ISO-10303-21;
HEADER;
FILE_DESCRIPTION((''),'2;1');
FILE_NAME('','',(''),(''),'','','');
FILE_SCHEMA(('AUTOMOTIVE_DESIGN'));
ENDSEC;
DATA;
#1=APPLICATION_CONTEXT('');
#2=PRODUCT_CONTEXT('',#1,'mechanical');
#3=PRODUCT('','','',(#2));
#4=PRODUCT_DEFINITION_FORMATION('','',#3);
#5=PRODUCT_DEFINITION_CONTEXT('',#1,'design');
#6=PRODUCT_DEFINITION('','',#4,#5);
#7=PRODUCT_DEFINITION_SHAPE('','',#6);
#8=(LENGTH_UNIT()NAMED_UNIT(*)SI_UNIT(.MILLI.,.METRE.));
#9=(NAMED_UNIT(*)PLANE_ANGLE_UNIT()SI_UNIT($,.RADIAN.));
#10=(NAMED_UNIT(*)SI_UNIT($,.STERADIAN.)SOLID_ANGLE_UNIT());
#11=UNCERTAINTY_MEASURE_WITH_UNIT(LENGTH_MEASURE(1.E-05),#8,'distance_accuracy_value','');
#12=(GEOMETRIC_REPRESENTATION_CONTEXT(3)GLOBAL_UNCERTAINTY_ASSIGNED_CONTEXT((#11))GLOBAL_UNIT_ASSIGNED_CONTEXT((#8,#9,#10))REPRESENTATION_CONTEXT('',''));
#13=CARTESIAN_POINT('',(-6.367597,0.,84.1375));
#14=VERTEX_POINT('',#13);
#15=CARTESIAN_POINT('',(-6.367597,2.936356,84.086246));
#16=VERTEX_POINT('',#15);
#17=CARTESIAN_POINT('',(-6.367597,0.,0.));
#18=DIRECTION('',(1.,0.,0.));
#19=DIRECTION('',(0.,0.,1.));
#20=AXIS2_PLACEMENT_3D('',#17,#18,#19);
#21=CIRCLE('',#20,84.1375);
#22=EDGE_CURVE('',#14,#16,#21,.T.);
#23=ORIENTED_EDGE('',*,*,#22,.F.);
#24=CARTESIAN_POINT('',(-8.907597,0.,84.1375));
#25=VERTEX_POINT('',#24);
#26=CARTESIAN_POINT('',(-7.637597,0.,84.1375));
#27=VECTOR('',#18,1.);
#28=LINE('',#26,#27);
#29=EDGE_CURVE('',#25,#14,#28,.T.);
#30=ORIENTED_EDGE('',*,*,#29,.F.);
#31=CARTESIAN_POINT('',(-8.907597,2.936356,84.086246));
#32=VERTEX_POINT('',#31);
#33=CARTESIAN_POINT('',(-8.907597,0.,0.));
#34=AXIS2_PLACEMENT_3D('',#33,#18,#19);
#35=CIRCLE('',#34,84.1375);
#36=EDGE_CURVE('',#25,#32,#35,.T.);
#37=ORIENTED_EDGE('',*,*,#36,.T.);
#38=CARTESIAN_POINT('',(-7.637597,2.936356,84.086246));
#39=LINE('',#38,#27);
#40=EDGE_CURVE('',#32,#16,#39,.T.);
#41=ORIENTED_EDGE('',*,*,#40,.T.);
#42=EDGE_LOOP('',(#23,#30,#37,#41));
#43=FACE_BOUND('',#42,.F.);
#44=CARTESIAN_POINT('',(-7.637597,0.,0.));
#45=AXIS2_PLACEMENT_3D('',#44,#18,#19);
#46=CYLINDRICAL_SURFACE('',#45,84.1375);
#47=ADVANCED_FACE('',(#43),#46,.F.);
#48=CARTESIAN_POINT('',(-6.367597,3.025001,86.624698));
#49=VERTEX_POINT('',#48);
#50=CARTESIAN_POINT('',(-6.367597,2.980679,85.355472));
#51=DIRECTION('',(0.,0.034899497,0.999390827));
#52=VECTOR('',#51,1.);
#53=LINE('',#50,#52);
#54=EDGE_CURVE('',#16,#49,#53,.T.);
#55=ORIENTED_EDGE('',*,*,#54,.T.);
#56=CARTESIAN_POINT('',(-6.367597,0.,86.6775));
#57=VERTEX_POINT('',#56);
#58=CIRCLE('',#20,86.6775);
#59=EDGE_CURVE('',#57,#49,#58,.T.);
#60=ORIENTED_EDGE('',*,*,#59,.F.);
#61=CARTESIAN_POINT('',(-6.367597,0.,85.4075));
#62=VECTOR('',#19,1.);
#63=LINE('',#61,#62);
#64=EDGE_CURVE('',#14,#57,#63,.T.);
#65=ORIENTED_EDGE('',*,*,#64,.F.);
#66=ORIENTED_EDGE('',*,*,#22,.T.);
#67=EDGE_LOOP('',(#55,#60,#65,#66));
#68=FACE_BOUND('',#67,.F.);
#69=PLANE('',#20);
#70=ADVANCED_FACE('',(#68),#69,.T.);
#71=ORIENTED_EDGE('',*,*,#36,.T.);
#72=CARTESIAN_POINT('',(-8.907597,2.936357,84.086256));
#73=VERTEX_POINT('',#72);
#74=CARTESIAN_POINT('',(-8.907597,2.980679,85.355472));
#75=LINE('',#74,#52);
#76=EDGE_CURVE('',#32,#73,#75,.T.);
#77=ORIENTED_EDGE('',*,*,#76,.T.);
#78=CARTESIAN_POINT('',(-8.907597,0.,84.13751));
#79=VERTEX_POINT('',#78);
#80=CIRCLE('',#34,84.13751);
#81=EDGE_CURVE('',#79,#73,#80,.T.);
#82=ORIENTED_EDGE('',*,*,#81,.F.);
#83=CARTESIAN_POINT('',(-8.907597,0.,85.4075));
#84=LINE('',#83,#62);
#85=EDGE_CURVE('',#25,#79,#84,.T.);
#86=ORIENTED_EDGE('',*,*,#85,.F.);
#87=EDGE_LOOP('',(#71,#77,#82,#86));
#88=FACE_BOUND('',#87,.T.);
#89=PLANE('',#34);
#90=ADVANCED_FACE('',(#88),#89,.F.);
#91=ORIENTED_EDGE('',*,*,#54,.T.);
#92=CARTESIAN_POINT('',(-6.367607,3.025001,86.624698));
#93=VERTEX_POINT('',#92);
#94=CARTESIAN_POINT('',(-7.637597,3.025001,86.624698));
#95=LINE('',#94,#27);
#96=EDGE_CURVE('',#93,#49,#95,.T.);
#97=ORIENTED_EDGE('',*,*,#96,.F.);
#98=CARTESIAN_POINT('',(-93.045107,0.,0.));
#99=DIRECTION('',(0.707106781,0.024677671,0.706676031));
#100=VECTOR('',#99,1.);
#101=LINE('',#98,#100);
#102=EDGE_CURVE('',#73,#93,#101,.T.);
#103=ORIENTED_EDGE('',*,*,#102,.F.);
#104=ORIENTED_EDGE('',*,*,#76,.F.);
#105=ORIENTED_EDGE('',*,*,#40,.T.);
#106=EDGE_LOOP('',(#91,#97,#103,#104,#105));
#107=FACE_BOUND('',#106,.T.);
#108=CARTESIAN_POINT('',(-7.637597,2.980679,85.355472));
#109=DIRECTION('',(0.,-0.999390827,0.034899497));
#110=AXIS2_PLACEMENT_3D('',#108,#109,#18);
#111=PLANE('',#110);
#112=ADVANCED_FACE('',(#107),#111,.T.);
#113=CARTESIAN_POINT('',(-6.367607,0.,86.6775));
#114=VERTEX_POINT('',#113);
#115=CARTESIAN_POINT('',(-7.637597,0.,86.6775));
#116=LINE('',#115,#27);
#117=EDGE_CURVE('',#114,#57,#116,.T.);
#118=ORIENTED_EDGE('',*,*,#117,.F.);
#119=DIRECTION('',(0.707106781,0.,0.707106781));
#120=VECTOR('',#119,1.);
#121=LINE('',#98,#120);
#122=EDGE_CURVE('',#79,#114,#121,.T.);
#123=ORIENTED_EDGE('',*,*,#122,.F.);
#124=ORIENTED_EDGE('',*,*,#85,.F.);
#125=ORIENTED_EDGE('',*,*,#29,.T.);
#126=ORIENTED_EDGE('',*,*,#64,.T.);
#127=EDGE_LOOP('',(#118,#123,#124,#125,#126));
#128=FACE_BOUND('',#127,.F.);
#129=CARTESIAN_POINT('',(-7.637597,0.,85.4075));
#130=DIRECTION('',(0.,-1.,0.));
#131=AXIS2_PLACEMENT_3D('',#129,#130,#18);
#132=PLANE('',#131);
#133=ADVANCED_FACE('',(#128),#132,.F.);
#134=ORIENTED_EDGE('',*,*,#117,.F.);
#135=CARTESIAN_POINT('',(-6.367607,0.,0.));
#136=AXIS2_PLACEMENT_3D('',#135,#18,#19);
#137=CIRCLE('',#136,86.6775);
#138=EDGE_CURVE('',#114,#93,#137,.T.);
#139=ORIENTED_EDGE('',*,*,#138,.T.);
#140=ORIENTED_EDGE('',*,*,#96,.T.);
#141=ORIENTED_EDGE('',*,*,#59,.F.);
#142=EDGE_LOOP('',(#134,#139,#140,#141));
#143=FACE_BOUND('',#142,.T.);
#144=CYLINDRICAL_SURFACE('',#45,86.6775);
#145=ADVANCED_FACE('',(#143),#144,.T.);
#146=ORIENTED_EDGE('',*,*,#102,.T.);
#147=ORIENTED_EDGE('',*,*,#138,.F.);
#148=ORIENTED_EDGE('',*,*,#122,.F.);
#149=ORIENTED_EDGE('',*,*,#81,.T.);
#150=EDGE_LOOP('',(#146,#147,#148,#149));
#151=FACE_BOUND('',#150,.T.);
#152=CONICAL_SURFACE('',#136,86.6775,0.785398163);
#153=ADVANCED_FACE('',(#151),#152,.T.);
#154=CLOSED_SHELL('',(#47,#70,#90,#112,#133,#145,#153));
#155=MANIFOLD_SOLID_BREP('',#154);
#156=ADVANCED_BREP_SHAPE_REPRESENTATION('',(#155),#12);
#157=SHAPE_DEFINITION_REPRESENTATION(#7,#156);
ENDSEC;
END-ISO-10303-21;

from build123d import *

# Parameters (mm, degrees)
F0_W     = 2.54
F0_H     = 2.54
F2_ANGLE = 358
F3_SIZE  = 2.53999


# Not quite as in the source:
# - a fillet or chamfer is up to 0.001 mm smaller than in the source, because OpenCascade refuses the exact size


with BuildPart() as f2:
    # F0 (on Front) → F2 (revolve)
    with BuildSketch(Plane.XZ):
        with Locations((-7.6375972124, 85.4075)):
            Rectangle(F0_W, F0_H)
    revolve(axis=Axis((5.7470723987, 0, 0), (1, 0, 0)), revolution_arc=F2_ANGLE)

    # F3 (size 2.54 in the source; OpenCascade refuses exactly that, so slightly less here)
    f3_edges = [f2.edges().sort_by_distance(p)[0] for p in [
        (-8.907597, -1.512731, -86.664299),
    ]]
    chamfer(f3_edges, length=F3_SIZE)


solid = f2.part
